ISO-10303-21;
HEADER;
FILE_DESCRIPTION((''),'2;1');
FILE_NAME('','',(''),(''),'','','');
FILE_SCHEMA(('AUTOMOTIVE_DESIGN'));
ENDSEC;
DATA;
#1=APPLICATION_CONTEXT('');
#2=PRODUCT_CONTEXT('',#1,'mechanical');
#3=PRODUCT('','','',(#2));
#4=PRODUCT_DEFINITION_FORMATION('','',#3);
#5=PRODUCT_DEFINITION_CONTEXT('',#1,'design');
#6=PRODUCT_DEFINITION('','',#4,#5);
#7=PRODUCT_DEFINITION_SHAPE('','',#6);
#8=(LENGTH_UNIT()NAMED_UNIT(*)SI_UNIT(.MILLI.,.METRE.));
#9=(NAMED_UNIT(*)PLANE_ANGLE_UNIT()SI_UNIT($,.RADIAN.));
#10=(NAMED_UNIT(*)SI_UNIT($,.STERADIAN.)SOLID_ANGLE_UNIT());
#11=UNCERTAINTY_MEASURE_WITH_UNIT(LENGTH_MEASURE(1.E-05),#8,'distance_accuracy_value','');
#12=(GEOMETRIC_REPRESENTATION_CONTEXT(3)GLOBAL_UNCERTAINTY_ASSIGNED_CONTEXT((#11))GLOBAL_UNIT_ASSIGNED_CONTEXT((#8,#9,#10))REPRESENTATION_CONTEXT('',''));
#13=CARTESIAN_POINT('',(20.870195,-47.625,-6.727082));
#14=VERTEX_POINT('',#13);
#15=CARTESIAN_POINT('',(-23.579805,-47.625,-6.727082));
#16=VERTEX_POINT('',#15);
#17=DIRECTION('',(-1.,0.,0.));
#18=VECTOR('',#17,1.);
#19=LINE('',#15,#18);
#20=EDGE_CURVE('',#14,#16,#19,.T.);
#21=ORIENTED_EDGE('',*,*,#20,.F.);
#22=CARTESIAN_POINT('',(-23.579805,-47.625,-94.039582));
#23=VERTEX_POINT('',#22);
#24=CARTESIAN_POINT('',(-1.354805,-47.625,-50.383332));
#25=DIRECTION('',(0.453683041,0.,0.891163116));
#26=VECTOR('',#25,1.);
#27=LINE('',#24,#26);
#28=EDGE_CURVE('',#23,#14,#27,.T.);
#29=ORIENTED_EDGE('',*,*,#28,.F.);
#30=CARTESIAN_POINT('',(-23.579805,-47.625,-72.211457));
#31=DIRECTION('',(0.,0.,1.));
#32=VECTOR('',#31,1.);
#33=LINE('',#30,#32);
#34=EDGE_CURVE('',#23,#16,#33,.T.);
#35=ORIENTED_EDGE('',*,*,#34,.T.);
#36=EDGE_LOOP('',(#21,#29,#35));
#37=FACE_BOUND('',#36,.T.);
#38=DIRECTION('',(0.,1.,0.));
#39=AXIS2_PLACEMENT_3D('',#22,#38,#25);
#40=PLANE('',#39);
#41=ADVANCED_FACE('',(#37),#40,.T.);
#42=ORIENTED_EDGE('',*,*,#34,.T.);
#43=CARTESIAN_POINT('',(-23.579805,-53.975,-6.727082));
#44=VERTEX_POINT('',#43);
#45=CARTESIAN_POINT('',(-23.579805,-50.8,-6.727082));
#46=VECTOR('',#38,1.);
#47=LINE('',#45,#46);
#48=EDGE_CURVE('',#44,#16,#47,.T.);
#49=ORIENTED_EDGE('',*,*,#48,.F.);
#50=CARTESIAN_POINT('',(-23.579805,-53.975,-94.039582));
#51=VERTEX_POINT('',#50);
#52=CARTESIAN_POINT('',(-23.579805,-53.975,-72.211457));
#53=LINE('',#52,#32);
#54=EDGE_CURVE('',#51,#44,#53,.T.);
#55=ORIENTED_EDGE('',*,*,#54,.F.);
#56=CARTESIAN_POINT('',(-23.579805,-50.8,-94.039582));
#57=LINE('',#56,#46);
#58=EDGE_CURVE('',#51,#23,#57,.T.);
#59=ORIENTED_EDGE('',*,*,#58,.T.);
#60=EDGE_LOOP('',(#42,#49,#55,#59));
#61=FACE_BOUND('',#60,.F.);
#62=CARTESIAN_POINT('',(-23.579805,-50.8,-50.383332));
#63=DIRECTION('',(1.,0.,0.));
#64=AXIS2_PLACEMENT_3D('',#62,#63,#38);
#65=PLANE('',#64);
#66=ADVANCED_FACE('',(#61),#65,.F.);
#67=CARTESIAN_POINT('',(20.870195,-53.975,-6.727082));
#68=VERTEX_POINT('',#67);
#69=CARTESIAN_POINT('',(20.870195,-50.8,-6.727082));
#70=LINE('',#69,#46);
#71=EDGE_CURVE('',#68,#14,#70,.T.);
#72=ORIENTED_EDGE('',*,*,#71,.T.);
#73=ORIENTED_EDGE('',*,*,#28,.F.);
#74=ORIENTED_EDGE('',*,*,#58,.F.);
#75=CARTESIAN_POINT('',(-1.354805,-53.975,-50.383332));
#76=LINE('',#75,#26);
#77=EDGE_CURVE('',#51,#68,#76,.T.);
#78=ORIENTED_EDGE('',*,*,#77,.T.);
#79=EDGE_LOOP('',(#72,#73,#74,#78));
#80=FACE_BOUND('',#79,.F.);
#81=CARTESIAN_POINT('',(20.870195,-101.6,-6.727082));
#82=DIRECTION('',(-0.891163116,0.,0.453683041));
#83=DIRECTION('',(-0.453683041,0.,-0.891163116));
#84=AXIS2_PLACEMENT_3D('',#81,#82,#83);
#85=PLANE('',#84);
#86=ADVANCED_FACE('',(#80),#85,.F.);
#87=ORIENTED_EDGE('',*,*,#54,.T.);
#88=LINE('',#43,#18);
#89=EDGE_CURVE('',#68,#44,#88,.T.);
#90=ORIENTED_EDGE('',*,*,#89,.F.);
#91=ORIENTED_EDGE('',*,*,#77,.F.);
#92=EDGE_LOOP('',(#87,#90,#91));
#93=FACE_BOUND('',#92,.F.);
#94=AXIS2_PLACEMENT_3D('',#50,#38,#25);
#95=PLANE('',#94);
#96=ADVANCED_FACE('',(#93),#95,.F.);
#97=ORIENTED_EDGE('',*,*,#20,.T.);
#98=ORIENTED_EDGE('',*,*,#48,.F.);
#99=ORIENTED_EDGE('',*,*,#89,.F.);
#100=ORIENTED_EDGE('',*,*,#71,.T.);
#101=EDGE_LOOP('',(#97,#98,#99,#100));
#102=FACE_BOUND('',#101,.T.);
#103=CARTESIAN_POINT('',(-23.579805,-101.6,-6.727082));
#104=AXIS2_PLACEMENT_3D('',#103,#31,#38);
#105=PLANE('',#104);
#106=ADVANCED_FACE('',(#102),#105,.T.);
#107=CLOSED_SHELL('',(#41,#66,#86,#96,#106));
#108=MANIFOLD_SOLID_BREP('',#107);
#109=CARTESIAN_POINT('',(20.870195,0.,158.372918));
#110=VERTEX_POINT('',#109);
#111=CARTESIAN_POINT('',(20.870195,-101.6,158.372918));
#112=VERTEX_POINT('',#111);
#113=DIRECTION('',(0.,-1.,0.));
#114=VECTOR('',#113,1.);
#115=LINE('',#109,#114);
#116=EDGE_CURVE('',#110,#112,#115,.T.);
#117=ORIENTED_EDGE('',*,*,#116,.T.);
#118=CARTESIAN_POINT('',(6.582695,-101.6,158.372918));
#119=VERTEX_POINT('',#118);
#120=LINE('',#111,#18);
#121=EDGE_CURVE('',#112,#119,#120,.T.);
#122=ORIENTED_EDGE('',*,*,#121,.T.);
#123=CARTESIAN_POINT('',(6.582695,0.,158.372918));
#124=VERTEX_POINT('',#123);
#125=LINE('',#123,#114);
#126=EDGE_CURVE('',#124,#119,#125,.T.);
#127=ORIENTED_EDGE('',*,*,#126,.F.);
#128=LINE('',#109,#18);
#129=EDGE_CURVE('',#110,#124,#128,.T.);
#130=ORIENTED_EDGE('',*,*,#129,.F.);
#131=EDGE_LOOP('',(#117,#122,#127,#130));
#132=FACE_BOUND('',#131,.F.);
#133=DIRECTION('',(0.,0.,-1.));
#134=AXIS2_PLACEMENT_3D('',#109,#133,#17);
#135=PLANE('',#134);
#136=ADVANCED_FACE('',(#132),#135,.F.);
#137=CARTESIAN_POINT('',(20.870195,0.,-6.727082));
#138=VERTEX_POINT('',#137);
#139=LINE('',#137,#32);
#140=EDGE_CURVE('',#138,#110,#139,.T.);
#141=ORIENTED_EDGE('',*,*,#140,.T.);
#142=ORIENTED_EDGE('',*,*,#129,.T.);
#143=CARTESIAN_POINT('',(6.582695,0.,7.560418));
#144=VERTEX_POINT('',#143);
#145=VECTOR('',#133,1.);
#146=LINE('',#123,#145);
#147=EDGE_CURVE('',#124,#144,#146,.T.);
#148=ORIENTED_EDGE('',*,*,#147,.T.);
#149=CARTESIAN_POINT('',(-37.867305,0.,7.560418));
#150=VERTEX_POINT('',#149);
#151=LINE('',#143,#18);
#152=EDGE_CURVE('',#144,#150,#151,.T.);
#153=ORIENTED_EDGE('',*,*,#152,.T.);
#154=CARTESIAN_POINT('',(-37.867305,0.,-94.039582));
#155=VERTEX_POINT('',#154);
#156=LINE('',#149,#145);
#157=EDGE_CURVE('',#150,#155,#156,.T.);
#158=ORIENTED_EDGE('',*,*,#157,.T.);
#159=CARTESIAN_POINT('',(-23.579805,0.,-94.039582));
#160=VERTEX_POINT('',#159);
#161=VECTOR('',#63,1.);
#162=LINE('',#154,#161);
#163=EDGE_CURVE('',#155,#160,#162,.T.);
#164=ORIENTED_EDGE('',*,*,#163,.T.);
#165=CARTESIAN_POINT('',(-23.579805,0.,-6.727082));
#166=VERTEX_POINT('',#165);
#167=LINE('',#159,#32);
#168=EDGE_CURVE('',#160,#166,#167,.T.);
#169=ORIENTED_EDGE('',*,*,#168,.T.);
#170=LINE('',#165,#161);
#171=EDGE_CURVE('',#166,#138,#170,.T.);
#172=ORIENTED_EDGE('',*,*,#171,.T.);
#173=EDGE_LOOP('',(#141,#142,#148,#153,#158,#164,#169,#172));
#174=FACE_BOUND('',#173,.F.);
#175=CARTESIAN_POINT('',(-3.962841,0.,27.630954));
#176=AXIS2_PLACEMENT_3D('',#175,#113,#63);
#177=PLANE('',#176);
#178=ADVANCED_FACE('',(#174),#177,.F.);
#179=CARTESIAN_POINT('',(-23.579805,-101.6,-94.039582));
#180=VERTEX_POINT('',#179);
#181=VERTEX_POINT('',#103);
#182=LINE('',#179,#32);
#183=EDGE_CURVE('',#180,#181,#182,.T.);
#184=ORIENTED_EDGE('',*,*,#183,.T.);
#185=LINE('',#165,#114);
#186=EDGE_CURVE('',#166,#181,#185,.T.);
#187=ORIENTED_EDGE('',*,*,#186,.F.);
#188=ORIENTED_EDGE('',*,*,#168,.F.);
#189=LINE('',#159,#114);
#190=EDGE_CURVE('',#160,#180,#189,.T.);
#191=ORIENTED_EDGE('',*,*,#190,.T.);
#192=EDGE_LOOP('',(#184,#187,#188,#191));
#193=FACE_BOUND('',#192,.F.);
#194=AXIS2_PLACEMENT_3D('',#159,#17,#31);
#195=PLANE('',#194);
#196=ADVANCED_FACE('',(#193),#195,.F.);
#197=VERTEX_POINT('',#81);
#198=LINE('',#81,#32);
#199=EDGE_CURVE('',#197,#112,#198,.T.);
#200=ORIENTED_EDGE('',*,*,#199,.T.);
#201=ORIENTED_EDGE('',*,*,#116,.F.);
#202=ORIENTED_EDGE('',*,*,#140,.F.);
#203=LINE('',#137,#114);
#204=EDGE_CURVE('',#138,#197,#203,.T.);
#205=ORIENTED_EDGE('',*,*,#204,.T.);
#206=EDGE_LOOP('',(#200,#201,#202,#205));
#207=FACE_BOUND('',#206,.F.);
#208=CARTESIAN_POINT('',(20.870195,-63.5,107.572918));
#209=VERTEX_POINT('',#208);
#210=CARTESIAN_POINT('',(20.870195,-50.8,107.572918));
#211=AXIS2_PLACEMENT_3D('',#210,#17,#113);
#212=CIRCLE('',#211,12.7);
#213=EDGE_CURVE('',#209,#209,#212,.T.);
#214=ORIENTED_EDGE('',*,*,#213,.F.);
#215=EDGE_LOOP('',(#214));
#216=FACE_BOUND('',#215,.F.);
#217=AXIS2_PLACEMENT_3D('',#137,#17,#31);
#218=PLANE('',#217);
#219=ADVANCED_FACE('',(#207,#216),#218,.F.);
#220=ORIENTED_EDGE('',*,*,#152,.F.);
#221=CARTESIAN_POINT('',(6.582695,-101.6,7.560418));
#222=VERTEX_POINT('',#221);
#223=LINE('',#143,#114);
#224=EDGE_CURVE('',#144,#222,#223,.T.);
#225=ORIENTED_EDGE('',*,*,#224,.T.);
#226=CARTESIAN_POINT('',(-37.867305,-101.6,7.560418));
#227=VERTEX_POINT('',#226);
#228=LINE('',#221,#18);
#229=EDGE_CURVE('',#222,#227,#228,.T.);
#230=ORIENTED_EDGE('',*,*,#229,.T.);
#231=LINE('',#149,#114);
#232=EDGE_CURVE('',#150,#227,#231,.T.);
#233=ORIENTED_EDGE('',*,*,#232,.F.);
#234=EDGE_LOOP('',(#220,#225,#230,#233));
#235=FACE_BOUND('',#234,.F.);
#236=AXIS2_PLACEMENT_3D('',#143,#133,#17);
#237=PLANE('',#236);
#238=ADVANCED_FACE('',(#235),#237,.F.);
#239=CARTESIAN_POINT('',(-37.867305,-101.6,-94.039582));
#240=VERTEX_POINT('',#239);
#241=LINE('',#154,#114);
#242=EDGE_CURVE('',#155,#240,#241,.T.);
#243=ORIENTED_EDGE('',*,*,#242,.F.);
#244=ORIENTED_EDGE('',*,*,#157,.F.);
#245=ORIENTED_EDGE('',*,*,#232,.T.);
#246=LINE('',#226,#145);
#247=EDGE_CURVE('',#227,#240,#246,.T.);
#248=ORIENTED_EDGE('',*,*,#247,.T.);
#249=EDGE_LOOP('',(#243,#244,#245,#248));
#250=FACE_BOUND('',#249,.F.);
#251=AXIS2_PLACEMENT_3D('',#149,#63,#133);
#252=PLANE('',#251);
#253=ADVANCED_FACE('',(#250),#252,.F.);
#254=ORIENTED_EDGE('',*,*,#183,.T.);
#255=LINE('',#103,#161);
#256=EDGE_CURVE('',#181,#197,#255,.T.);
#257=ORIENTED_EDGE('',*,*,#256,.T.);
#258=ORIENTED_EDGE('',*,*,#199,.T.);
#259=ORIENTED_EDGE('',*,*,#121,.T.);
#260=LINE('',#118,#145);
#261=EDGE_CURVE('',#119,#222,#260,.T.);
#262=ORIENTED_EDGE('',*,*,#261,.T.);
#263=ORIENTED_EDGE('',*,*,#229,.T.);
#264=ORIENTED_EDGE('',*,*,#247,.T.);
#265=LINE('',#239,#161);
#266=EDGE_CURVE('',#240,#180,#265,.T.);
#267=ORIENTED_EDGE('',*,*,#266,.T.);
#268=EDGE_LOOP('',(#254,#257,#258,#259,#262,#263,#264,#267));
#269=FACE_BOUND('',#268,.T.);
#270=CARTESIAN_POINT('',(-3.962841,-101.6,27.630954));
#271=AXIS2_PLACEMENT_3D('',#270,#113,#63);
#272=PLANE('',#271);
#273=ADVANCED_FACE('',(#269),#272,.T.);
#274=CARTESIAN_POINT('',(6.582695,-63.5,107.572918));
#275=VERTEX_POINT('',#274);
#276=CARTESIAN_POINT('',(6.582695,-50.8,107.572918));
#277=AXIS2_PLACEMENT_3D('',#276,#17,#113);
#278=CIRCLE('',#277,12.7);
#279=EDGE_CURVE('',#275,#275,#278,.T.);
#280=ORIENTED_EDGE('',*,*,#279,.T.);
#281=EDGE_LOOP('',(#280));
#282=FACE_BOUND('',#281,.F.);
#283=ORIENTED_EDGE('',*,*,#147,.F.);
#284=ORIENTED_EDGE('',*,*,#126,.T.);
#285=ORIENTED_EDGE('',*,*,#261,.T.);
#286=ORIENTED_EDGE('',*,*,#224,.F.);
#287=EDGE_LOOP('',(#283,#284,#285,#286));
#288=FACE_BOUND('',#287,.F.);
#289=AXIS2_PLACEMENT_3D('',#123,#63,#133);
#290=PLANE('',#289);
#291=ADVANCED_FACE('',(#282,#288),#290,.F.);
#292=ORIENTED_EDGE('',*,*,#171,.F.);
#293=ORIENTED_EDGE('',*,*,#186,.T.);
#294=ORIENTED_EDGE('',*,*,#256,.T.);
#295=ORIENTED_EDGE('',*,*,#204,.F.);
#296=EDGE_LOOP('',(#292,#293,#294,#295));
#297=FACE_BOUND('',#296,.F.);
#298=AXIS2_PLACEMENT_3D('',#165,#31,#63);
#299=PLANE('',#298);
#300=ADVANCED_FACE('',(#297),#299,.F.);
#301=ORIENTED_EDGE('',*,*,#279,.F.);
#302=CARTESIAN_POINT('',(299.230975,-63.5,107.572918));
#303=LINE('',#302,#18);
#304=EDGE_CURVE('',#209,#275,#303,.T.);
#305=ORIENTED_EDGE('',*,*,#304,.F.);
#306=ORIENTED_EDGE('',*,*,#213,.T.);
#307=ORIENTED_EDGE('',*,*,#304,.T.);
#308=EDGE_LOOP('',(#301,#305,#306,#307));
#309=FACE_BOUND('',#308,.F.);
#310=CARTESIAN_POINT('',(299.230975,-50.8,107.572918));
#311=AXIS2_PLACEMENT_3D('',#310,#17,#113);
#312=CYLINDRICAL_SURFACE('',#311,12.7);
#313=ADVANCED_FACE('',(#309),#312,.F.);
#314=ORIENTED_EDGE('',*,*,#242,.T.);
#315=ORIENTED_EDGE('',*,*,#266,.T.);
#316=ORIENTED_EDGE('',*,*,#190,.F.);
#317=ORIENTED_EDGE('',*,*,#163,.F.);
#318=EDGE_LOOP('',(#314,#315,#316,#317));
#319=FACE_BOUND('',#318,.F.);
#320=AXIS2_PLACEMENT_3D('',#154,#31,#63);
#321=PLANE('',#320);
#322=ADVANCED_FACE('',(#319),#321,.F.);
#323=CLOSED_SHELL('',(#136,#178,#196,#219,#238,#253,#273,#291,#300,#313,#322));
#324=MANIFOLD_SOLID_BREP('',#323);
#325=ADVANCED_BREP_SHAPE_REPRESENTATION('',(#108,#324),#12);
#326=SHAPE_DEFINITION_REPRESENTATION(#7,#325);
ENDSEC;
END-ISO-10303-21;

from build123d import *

# Parameters (mm, degrees)
F1_DEPTH  = 101.6
F3_D      = 25.4
F4_W      = 101.6
F4_H      = 87.3125
F5_DEPTH  = 44.45
F7_DEPTH  = 101.601
F8_W      = 47.625
F8_H      = 97.9758906887
F9_DEPTH  = 127.2487635172
F10_DEPTH = 127.2487635172


with BuildPart() as f1:
    # F0 (on Front) → F1 (new body)
    with BuildSketch(Plane.XZ):
        Polygon((-37.8673051461, 7.5604184782), (-37.8673051461, -94.0395815218), (-23.5798051461, -94.0395815218), (-23.5798051461, -6.7270815218), (20.8701948539, -6.7270815218), (20.8701948539, 158.3729184782), (6.5826948539, 158.3729184782), (6.5826948539, 7.5604184782), align=None)
    extrude(amount=F1_DEPTH)

    # F3 (through all)
    with Locations(Plane.YZ.offset(20.8701948539)):
        with Locations((-50.8, 107.5729184782)):
            Hole(F3_D / 2)


with BuildPart() as f5:
    # F4 (on face) → F5 (new body, through all)
    with BuildSketch(Plane.YZ.offset(-23.5798051461)):
        with Locations((-50.8, -50.3833315218)):
            Rectangle(F4_W, F4_H)
    extrude(amount=F5_DEPTH)

    # F6 (on face) → F7 (cut, through all)
    with BuildSketch(Plane.XZ.offset(101.6)):
        Polygon((20.8701948539, -6.7270815218), (-23.5798051461, -94.0395815218), (20.8701948539, -94.0395815218), align=None)
    extrude(amount=-F7_DEPTH, mode=Mode.SUBTRACT)

    # F8 (on face) → F9 (cut, through all)
    with BuildSketch(Plane(origin=(19.2943147747, 0, -9.8225602489), x_dir=(0, 1, 0), z_dir=(0.8911631156, 0, -0.4536830407))):
        with Locations((-23.8125, -45.5144188116)):
            Rectangle(F8_W, F8_H)
    extrude(amount=-F9_DEPTH, mode=Mode.SUBTRACT)

    # F8 (on face) → F10 (cut, through all)
    with BuildSketch(Plane(origin=(19.2943147747, 0, -9.8225602489), x_dir=(0, 1, 0), z_dir=(0.8911631156, 0, -0.4536830407))):
        with Locations((-77.7875, -45.5144188116)):
            Rectangle(F8_W, F8_H)
    extrude(amount=-F10_DEPTH, mode=Mode.SUBTRACT)


solid = Compound([f1.part, f5.part])
